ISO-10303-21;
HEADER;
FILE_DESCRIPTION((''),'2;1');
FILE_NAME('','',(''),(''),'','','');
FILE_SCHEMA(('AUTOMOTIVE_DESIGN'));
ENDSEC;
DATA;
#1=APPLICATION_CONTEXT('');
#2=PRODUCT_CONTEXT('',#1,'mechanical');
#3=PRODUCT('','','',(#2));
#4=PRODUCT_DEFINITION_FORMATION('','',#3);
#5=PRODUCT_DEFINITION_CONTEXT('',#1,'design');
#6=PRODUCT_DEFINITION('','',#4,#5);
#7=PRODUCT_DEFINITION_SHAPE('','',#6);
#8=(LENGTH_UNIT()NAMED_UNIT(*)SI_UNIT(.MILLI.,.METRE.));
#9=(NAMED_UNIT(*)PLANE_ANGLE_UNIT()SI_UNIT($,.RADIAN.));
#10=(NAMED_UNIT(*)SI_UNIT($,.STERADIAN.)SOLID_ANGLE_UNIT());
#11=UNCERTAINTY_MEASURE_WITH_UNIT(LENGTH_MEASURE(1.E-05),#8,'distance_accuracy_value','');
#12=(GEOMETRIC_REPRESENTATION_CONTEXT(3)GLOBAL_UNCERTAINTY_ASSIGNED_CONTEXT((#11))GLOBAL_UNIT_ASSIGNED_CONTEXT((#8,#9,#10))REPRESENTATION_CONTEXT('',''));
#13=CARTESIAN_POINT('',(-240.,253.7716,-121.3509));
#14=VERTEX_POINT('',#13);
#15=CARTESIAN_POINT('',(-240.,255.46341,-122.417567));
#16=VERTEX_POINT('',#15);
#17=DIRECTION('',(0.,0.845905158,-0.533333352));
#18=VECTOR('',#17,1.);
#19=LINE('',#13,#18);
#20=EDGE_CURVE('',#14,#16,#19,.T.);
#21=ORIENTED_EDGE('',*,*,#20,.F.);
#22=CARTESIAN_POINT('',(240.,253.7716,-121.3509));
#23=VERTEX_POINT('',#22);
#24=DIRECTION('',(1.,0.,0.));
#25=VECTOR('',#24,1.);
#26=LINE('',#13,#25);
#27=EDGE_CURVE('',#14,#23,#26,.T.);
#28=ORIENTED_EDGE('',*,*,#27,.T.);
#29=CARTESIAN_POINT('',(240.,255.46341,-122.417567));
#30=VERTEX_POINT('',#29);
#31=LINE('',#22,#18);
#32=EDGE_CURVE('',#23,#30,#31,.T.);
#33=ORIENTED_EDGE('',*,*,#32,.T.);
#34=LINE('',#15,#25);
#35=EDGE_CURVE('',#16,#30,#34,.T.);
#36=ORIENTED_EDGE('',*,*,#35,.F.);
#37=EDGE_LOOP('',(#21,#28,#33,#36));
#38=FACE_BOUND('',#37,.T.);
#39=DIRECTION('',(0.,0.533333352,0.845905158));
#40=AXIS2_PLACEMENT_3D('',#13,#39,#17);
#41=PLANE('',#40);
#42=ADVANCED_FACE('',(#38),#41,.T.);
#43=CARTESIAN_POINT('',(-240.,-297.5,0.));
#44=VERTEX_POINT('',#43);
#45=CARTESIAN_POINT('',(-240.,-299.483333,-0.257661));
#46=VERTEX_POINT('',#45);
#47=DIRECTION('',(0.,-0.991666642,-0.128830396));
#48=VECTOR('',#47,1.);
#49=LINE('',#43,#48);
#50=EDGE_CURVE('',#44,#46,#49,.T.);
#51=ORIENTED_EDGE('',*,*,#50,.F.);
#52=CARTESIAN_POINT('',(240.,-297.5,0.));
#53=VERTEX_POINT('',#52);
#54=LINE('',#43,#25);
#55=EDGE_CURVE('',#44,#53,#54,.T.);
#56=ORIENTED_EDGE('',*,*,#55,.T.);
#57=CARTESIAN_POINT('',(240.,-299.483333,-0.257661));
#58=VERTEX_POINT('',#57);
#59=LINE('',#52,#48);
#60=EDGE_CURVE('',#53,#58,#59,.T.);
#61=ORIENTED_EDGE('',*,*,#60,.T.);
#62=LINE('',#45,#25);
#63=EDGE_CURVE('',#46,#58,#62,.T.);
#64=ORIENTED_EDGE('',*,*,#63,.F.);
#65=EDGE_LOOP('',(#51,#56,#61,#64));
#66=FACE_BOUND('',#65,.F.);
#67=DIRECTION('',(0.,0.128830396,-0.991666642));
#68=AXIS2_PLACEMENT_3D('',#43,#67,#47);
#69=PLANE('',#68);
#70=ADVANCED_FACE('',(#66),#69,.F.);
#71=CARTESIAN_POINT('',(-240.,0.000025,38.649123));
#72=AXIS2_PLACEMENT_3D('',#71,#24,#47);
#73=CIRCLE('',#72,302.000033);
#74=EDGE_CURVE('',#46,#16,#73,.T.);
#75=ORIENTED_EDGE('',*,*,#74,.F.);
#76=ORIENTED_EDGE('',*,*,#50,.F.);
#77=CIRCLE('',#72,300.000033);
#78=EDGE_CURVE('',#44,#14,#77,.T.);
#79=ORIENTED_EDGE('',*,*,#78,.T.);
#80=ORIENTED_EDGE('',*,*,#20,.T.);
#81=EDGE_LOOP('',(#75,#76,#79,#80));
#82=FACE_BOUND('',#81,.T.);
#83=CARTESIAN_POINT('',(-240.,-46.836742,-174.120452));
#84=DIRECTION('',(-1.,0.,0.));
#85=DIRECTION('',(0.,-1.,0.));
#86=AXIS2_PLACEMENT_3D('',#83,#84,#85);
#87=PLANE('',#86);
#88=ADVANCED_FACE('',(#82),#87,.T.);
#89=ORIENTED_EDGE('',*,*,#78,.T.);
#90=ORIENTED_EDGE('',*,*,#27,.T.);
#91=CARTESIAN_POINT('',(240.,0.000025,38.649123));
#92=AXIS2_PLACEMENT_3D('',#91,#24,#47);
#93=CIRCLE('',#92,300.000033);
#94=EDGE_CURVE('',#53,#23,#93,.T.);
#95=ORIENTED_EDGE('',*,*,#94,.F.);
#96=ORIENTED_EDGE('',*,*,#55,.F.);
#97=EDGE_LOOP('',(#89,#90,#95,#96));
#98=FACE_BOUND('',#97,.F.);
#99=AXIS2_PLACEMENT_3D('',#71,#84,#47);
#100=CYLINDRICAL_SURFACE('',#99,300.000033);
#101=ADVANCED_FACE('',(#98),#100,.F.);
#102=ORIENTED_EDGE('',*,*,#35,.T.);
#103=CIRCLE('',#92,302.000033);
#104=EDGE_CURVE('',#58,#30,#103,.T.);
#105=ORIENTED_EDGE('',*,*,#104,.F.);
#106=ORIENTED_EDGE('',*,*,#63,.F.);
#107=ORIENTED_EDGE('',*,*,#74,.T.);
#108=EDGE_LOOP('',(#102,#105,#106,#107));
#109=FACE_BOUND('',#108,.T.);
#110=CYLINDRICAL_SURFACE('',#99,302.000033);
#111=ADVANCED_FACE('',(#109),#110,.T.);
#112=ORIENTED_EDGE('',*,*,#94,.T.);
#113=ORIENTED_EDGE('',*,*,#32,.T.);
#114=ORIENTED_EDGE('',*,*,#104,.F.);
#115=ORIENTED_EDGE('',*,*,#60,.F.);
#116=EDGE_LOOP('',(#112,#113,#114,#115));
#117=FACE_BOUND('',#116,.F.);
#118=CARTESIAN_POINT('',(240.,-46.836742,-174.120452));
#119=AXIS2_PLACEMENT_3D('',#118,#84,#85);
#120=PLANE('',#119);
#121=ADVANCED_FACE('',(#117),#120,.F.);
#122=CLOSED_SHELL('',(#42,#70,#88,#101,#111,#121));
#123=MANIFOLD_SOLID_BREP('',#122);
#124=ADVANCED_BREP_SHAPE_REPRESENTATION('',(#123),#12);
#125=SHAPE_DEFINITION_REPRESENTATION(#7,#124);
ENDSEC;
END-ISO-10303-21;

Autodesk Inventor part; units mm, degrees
ref_plane "YZ Plane" through (0, 0, 0) normal (1, 0, 0) x (0, 1, 0)
ref_plane "XZ Plane" through (0, 0, 0) normal (0, 1, 0) x (-1, 0, 0)
ref_plane "XY Plane" through (0, 0, 0) normal (0, 0, 1) x (1, 0, 0)
sketch "Sketch7" plane through (0, 0, 0) normal (1, 0, 0) x (0, 1, 0)
  line L0 (297.5, 0) -> (-297.5, 0) construction
  arc A0 (-297.5, 0) -> (253.7716, -121.3509) centre (0, 38.6491) ccw
  line L1 (-253.7716, -121.3509) -> (253.7716, -121.3509) construction
  arc A1 (253.7716, -121.3509) -> (297.5, 0) centre (0, 38.6491) ccw construction
  line L2 (-297.5, 0) -> (-263.5472, -261.3509) construction
  line L3 (-297.5, 0) -> (-297.5, -261.3509) construction
  line L4 (-297.5, -261.3509) -> (165.5032, -261.3509) construction
  line L5 (253.7716, -121.3509) -> (165.5032, -261.3509) construction
  line L6 (-297.5, 0) -> (-310.383, 99.1667)
  line L7 (253.7716, -121.3509) -> (253.7716, 0) construction
  point P0 (0, 0)
  point P1 (0, 0)
  point P2 (-123.3439, -261.3509)
  dimension "d54" = 300
  dimension "d66" = 121.3509
  dimension "d68" = 7.402
  dimension "d69" = 595
  dimension "d70" = 140
  dimension "d72" = 100
  dimension "d73_joint_angle" = 7.402
  dimension "d74" = 147.769
contour flange "Contour Flange1" sketch "Sketch7" thickness 2 bend radius 2.75 width 480 along (1, 0, 0) mid plane yes both sides no wall seen from (0, -64.4946, -254.3363) lies toward (0, -0.2149821, -0.976618) curves A0
bend "Bend5"
corner "Corner5"
equation "\"d55\" = Thickness"
equation "\"d56\" = BendReliefWidth"
equation "\"d57\" = BendReliefDepth"
equation "\"d58\" = MinimumRemnant"
equation "\"d59\" = TransitionRadius"
equation "\"d61\" = BendRadius"
equation "\"d63\" = CornerReliefSize"
equation "\"d64\" = GapSize"
equation "\"d65\" = JacobiRadiusSize"
equation "\"BendReliefWidth\" = Thickness"
equation "\"BendReliefDepth\" = 0.5 * Thickness"
equation "\"CornerReliefSize\" = 4 * Thickness"
equation "\"MinimumRemnant\" = 2 * Thickness"
equation "\"TransitionRadius\" = BendRadius"
equation "\"JacobiRadiusSize\" = BendRadius"
equation "\"GapSize\" = Thickness"
equation "\"Thickness\" = 2"
equation "\"BendRadius\" = 2.75"
properties part number "TRM 027 tromel" material "AISI 304"
